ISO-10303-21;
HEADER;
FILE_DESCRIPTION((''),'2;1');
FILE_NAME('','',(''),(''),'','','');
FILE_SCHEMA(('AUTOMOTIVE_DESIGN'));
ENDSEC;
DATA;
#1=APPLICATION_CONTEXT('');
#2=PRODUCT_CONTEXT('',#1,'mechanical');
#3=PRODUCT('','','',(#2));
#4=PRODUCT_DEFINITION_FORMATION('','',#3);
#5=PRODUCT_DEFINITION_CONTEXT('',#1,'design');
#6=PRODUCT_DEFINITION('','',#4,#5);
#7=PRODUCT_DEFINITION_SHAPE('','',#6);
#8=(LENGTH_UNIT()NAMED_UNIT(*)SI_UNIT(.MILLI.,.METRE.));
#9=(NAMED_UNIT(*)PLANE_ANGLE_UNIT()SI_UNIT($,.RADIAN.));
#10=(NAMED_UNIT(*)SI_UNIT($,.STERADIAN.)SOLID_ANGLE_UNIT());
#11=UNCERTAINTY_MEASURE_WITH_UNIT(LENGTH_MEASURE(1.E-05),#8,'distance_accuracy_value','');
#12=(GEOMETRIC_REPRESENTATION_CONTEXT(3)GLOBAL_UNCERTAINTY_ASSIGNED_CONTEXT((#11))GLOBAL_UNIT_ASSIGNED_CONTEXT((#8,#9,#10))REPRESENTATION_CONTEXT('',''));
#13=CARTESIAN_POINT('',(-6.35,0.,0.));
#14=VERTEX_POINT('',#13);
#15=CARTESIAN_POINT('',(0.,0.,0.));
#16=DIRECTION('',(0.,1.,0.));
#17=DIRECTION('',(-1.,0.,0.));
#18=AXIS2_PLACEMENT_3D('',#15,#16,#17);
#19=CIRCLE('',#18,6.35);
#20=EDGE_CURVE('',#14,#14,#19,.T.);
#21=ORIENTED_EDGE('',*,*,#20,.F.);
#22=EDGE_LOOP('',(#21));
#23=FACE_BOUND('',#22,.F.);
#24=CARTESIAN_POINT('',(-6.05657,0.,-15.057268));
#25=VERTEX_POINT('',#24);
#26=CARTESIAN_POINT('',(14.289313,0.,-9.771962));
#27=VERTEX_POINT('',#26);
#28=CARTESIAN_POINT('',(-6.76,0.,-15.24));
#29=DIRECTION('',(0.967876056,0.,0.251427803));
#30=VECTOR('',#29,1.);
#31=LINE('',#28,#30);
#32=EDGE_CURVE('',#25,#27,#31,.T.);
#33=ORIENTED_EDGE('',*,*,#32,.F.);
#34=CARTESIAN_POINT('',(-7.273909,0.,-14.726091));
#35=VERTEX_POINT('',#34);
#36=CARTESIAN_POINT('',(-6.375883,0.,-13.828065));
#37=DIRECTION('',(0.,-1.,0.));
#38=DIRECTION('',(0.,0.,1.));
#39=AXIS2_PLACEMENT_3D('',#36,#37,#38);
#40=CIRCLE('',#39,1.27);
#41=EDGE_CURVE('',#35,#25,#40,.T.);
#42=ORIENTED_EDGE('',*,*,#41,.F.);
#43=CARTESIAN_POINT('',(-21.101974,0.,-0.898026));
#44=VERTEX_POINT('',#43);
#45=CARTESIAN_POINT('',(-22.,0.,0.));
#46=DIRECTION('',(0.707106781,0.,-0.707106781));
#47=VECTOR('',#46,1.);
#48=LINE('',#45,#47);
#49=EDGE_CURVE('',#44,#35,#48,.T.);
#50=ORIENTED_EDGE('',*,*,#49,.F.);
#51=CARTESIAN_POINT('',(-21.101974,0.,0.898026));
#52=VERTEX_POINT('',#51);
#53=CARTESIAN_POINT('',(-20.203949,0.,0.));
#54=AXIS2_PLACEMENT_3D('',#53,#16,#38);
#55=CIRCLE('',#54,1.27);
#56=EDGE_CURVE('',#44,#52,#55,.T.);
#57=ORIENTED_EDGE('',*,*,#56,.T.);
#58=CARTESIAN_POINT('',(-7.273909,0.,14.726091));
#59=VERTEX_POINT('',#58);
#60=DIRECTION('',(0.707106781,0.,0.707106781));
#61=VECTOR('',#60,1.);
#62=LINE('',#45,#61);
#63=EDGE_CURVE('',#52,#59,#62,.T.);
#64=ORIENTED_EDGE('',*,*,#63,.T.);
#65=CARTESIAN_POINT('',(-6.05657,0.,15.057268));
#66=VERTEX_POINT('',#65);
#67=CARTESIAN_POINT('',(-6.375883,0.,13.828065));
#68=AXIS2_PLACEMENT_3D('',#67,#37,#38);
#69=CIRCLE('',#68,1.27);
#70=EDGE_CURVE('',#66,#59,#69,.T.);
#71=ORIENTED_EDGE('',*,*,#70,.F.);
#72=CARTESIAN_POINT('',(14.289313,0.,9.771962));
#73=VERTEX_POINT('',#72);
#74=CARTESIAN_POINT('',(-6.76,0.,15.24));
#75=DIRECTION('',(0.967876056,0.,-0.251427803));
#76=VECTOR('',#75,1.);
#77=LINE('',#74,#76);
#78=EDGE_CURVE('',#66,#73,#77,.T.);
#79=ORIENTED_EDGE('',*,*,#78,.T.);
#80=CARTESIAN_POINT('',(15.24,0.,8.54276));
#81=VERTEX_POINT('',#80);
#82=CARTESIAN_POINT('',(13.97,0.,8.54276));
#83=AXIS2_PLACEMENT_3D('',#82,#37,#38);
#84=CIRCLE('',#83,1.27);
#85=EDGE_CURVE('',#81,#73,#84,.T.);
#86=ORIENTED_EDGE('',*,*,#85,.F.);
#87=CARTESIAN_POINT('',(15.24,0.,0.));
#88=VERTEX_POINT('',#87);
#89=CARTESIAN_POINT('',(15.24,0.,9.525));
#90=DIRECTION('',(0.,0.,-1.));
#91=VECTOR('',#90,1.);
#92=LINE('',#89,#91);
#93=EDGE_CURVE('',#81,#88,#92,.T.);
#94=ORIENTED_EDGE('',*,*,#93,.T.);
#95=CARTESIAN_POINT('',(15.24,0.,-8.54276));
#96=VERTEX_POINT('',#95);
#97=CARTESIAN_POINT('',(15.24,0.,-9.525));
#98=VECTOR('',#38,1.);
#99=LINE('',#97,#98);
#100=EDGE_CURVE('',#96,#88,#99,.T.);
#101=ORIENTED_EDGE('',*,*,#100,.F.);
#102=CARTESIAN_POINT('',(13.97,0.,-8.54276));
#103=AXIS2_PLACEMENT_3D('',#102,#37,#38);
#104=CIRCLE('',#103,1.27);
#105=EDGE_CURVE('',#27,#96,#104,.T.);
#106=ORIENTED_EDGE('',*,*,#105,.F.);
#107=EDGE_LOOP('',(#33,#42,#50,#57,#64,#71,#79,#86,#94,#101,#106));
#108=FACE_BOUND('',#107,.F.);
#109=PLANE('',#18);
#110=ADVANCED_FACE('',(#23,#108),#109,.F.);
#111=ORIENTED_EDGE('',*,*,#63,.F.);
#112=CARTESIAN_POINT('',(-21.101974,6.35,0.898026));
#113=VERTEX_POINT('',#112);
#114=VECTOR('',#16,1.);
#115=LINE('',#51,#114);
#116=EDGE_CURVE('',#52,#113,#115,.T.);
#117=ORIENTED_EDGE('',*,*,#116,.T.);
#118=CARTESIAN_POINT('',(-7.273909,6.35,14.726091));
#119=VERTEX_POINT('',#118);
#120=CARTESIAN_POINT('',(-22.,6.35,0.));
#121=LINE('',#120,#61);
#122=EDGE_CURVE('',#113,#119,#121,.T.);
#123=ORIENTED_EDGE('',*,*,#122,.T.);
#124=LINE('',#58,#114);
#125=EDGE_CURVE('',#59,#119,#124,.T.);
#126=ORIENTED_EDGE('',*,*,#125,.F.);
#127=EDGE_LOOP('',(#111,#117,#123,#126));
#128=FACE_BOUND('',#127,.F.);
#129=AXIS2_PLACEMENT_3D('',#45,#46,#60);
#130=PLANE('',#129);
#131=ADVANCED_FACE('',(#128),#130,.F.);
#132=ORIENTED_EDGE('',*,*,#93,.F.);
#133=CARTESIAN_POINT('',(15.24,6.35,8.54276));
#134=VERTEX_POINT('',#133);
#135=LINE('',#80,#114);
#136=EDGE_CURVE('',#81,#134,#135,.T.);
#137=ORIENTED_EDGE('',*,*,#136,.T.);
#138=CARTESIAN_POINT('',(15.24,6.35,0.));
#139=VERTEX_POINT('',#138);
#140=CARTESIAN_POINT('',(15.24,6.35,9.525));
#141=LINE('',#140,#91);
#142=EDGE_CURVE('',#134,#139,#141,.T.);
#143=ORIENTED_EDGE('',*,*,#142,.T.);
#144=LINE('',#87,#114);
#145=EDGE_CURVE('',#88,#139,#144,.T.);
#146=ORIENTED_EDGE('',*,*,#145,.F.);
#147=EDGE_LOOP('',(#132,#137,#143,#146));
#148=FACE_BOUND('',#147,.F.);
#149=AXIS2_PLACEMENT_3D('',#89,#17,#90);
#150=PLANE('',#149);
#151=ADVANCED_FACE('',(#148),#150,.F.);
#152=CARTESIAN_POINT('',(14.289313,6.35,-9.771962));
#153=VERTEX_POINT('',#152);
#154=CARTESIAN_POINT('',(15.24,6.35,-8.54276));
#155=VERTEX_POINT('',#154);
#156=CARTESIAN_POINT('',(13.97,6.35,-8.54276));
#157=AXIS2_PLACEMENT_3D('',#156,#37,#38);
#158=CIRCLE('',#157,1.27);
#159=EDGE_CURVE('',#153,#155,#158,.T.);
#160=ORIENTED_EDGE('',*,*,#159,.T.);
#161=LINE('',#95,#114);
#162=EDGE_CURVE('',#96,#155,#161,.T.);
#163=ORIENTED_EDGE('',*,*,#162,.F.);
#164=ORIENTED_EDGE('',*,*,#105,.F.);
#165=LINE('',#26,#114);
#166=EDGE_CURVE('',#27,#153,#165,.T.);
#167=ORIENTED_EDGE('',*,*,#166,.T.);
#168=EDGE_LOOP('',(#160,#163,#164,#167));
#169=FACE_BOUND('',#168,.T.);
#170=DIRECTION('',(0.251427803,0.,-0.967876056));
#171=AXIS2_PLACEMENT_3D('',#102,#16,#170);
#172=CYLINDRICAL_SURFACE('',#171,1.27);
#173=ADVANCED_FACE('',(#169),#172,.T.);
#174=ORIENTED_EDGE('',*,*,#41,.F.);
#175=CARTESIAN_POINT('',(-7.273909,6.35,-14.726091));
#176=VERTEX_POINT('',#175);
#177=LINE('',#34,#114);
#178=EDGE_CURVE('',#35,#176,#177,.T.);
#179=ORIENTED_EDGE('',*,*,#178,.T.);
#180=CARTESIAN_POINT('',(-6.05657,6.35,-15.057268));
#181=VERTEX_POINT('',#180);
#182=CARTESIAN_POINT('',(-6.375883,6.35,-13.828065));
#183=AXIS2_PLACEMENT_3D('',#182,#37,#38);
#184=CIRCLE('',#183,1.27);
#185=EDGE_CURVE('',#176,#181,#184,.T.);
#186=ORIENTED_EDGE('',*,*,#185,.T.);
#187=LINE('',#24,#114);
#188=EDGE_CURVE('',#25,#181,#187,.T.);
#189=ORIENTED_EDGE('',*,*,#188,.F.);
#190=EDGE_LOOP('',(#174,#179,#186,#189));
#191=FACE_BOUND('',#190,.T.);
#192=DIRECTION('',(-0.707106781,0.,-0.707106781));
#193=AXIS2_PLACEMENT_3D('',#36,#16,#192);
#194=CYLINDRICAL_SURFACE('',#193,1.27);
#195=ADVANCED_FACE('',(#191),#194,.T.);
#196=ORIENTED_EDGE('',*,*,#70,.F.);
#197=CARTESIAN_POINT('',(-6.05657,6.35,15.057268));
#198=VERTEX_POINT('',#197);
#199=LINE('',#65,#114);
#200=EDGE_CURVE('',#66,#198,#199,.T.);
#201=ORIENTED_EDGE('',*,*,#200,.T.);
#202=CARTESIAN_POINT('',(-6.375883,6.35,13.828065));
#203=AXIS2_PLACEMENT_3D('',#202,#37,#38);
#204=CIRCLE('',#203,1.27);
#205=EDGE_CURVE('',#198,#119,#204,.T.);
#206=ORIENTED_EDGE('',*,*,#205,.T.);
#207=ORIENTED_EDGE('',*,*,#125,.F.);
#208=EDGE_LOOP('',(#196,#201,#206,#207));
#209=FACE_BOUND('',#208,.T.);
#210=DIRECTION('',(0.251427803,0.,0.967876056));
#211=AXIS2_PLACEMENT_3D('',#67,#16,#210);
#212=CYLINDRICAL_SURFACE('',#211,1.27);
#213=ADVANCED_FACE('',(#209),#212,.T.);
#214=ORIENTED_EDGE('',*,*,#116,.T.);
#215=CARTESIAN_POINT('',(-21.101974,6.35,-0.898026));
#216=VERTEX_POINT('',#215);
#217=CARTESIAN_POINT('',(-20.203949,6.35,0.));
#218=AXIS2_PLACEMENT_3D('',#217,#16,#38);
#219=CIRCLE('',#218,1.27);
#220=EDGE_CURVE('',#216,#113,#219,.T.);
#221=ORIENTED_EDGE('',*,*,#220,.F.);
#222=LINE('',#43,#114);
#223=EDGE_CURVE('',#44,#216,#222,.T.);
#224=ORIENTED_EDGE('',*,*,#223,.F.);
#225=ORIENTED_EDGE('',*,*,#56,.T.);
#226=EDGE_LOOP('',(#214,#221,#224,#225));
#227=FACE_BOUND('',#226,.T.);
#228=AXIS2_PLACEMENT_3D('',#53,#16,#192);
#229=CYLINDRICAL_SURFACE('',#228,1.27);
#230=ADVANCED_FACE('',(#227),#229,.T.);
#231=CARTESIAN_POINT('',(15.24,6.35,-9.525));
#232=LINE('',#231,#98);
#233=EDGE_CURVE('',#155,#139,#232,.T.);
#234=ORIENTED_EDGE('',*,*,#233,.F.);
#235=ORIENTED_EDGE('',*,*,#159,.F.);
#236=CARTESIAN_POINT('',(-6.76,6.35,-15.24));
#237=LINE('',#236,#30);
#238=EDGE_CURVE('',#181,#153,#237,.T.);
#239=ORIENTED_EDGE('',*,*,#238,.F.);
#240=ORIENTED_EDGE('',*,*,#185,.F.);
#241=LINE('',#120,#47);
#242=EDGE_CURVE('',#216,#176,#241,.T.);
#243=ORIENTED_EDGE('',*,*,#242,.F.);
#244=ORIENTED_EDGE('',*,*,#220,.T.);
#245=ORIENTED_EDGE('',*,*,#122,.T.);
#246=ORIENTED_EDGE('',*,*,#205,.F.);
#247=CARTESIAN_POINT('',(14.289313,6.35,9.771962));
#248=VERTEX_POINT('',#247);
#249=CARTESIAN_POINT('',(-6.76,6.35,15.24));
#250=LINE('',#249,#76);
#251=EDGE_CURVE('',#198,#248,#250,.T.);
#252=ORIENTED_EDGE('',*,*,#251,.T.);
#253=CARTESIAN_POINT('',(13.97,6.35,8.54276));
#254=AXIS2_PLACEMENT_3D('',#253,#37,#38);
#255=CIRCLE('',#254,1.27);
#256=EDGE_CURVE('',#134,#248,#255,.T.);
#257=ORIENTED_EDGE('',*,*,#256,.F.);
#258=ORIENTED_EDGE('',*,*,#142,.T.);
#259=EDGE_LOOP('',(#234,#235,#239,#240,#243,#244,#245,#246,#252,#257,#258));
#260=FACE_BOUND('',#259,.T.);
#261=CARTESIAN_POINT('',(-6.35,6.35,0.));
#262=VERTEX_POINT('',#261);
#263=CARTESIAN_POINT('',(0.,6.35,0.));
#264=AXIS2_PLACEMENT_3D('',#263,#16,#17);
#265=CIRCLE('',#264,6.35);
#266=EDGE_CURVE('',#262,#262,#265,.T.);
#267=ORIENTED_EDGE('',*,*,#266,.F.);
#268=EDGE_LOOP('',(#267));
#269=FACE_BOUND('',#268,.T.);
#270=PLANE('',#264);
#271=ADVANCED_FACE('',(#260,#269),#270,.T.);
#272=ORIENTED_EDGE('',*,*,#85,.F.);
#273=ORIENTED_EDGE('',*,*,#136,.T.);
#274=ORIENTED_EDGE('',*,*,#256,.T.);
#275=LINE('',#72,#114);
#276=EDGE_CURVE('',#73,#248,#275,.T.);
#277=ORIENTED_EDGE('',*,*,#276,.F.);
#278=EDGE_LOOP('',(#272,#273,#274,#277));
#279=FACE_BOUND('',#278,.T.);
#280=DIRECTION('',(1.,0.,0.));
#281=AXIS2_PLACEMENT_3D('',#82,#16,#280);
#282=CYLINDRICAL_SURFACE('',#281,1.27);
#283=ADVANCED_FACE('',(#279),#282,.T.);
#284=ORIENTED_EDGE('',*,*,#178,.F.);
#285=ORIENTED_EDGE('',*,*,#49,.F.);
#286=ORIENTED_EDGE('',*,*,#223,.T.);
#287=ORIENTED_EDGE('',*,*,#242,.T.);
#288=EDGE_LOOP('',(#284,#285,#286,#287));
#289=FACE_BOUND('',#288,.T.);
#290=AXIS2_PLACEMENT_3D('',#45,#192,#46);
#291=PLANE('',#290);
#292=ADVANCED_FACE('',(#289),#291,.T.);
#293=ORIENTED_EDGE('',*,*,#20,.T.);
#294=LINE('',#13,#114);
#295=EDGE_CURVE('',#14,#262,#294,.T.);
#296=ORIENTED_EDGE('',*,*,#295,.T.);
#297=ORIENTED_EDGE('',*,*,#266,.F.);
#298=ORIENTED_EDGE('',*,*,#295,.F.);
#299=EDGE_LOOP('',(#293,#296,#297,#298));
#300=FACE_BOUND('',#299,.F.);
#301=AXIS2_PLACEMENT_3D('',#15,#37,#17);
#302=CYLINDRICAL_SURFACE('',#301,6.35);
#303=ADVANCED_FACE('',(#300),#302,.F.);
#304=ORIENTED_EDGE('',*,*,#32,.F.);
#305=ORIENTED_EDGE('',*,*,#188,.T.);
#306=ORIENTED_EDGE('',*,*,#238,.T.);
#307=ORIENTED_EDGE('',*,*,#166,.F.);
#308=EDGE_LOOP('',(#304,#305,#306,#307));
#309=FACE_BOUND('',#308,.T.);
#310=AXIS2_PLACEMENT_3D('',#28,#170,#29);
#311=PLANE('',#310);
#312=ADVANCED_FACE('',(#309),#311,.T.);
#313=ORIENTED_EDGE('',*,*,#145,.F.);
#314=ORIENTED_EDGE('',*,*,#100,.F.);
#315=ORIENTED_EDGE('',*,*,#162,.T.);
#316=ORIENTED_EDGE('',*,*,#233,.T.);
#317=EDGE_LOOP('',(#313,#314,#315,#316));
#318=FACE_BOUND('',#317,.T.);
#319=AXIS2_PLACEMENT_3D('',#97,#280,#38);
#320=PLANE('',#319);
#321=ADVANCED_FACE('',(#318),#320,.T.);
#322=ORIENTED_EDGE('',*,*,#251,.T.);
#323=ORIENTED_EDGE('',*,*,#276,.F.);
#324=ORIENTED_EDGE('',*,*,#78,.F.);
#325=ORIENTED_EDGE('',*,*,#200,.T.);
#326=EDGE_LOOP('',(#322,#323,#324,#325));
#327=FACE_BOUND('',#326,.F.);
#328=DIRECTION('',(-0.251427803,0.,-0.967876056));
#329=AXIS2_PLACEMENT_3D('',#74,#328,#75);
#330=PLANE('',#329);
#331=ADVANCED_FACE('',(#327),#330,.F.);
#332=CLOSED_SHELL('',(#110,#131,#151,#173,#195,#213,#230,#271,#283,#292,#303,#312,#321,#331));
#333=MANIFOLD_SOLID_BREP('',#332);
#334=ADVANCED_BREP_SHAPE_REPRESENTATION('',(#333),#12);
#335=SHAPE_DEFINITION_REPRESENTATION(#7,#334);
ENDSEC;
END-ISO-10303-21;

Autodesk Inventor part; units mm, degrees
ref_plane "YZ Plane" through (0, 0, 0) normal (1, 0, 0) x (0, 1, 0)
ref_plane "XZ Plane" through (0, 0, 0) normal (0, 1, 0) x (-1, 0, 0)
ref_plane "XY Plane" through (0, 0, 0) normal (0, 0, 1) x (1, 0, 0)
sketch "Sketch1" plane through (0, 0, 0) normal (0, 1, 0) x (-1, 0, 0)
  circle A0 centre (0, 0) radius 6.35
  line L0 (22, 0) -> (6.76, 15.24)
  line L1 (6.76, 15.24) -> (-15.24, 9.525)
  line L2 (-15.24, 9.525) -> (-15.24, 0)
  line L3 (22, 0) -> (0, 0)
  line L4 (22, 0) -> (6.76, -15.24)
  line L5 (6.76, -15.24) -> (-15.24, -9.525)
  line L6 (-15.24, -9.525) -> (-15.24, 0)
  dimension "d0" = 12.7
  dimension "d1" = 22
  dimension "d2" = 15.24
  dimension "d3" = 45
  dimension "d4" = 15.24
  dimension "d5" = 9.525
extrude "Extrusion1" add sketch "Sketch1" along normal blind 6.35
fillet "Fillet1" radius 1.27 5 edges at (-22, 3.175, 0) (-6.76, 3.175, 15.24) (-6.76, 3.175, -15.24) (15.24, 3.175, 9.525) (15.24, 3.175, -9.525)
properties part number "ALIGNMENT JIG 2SCREEN"
